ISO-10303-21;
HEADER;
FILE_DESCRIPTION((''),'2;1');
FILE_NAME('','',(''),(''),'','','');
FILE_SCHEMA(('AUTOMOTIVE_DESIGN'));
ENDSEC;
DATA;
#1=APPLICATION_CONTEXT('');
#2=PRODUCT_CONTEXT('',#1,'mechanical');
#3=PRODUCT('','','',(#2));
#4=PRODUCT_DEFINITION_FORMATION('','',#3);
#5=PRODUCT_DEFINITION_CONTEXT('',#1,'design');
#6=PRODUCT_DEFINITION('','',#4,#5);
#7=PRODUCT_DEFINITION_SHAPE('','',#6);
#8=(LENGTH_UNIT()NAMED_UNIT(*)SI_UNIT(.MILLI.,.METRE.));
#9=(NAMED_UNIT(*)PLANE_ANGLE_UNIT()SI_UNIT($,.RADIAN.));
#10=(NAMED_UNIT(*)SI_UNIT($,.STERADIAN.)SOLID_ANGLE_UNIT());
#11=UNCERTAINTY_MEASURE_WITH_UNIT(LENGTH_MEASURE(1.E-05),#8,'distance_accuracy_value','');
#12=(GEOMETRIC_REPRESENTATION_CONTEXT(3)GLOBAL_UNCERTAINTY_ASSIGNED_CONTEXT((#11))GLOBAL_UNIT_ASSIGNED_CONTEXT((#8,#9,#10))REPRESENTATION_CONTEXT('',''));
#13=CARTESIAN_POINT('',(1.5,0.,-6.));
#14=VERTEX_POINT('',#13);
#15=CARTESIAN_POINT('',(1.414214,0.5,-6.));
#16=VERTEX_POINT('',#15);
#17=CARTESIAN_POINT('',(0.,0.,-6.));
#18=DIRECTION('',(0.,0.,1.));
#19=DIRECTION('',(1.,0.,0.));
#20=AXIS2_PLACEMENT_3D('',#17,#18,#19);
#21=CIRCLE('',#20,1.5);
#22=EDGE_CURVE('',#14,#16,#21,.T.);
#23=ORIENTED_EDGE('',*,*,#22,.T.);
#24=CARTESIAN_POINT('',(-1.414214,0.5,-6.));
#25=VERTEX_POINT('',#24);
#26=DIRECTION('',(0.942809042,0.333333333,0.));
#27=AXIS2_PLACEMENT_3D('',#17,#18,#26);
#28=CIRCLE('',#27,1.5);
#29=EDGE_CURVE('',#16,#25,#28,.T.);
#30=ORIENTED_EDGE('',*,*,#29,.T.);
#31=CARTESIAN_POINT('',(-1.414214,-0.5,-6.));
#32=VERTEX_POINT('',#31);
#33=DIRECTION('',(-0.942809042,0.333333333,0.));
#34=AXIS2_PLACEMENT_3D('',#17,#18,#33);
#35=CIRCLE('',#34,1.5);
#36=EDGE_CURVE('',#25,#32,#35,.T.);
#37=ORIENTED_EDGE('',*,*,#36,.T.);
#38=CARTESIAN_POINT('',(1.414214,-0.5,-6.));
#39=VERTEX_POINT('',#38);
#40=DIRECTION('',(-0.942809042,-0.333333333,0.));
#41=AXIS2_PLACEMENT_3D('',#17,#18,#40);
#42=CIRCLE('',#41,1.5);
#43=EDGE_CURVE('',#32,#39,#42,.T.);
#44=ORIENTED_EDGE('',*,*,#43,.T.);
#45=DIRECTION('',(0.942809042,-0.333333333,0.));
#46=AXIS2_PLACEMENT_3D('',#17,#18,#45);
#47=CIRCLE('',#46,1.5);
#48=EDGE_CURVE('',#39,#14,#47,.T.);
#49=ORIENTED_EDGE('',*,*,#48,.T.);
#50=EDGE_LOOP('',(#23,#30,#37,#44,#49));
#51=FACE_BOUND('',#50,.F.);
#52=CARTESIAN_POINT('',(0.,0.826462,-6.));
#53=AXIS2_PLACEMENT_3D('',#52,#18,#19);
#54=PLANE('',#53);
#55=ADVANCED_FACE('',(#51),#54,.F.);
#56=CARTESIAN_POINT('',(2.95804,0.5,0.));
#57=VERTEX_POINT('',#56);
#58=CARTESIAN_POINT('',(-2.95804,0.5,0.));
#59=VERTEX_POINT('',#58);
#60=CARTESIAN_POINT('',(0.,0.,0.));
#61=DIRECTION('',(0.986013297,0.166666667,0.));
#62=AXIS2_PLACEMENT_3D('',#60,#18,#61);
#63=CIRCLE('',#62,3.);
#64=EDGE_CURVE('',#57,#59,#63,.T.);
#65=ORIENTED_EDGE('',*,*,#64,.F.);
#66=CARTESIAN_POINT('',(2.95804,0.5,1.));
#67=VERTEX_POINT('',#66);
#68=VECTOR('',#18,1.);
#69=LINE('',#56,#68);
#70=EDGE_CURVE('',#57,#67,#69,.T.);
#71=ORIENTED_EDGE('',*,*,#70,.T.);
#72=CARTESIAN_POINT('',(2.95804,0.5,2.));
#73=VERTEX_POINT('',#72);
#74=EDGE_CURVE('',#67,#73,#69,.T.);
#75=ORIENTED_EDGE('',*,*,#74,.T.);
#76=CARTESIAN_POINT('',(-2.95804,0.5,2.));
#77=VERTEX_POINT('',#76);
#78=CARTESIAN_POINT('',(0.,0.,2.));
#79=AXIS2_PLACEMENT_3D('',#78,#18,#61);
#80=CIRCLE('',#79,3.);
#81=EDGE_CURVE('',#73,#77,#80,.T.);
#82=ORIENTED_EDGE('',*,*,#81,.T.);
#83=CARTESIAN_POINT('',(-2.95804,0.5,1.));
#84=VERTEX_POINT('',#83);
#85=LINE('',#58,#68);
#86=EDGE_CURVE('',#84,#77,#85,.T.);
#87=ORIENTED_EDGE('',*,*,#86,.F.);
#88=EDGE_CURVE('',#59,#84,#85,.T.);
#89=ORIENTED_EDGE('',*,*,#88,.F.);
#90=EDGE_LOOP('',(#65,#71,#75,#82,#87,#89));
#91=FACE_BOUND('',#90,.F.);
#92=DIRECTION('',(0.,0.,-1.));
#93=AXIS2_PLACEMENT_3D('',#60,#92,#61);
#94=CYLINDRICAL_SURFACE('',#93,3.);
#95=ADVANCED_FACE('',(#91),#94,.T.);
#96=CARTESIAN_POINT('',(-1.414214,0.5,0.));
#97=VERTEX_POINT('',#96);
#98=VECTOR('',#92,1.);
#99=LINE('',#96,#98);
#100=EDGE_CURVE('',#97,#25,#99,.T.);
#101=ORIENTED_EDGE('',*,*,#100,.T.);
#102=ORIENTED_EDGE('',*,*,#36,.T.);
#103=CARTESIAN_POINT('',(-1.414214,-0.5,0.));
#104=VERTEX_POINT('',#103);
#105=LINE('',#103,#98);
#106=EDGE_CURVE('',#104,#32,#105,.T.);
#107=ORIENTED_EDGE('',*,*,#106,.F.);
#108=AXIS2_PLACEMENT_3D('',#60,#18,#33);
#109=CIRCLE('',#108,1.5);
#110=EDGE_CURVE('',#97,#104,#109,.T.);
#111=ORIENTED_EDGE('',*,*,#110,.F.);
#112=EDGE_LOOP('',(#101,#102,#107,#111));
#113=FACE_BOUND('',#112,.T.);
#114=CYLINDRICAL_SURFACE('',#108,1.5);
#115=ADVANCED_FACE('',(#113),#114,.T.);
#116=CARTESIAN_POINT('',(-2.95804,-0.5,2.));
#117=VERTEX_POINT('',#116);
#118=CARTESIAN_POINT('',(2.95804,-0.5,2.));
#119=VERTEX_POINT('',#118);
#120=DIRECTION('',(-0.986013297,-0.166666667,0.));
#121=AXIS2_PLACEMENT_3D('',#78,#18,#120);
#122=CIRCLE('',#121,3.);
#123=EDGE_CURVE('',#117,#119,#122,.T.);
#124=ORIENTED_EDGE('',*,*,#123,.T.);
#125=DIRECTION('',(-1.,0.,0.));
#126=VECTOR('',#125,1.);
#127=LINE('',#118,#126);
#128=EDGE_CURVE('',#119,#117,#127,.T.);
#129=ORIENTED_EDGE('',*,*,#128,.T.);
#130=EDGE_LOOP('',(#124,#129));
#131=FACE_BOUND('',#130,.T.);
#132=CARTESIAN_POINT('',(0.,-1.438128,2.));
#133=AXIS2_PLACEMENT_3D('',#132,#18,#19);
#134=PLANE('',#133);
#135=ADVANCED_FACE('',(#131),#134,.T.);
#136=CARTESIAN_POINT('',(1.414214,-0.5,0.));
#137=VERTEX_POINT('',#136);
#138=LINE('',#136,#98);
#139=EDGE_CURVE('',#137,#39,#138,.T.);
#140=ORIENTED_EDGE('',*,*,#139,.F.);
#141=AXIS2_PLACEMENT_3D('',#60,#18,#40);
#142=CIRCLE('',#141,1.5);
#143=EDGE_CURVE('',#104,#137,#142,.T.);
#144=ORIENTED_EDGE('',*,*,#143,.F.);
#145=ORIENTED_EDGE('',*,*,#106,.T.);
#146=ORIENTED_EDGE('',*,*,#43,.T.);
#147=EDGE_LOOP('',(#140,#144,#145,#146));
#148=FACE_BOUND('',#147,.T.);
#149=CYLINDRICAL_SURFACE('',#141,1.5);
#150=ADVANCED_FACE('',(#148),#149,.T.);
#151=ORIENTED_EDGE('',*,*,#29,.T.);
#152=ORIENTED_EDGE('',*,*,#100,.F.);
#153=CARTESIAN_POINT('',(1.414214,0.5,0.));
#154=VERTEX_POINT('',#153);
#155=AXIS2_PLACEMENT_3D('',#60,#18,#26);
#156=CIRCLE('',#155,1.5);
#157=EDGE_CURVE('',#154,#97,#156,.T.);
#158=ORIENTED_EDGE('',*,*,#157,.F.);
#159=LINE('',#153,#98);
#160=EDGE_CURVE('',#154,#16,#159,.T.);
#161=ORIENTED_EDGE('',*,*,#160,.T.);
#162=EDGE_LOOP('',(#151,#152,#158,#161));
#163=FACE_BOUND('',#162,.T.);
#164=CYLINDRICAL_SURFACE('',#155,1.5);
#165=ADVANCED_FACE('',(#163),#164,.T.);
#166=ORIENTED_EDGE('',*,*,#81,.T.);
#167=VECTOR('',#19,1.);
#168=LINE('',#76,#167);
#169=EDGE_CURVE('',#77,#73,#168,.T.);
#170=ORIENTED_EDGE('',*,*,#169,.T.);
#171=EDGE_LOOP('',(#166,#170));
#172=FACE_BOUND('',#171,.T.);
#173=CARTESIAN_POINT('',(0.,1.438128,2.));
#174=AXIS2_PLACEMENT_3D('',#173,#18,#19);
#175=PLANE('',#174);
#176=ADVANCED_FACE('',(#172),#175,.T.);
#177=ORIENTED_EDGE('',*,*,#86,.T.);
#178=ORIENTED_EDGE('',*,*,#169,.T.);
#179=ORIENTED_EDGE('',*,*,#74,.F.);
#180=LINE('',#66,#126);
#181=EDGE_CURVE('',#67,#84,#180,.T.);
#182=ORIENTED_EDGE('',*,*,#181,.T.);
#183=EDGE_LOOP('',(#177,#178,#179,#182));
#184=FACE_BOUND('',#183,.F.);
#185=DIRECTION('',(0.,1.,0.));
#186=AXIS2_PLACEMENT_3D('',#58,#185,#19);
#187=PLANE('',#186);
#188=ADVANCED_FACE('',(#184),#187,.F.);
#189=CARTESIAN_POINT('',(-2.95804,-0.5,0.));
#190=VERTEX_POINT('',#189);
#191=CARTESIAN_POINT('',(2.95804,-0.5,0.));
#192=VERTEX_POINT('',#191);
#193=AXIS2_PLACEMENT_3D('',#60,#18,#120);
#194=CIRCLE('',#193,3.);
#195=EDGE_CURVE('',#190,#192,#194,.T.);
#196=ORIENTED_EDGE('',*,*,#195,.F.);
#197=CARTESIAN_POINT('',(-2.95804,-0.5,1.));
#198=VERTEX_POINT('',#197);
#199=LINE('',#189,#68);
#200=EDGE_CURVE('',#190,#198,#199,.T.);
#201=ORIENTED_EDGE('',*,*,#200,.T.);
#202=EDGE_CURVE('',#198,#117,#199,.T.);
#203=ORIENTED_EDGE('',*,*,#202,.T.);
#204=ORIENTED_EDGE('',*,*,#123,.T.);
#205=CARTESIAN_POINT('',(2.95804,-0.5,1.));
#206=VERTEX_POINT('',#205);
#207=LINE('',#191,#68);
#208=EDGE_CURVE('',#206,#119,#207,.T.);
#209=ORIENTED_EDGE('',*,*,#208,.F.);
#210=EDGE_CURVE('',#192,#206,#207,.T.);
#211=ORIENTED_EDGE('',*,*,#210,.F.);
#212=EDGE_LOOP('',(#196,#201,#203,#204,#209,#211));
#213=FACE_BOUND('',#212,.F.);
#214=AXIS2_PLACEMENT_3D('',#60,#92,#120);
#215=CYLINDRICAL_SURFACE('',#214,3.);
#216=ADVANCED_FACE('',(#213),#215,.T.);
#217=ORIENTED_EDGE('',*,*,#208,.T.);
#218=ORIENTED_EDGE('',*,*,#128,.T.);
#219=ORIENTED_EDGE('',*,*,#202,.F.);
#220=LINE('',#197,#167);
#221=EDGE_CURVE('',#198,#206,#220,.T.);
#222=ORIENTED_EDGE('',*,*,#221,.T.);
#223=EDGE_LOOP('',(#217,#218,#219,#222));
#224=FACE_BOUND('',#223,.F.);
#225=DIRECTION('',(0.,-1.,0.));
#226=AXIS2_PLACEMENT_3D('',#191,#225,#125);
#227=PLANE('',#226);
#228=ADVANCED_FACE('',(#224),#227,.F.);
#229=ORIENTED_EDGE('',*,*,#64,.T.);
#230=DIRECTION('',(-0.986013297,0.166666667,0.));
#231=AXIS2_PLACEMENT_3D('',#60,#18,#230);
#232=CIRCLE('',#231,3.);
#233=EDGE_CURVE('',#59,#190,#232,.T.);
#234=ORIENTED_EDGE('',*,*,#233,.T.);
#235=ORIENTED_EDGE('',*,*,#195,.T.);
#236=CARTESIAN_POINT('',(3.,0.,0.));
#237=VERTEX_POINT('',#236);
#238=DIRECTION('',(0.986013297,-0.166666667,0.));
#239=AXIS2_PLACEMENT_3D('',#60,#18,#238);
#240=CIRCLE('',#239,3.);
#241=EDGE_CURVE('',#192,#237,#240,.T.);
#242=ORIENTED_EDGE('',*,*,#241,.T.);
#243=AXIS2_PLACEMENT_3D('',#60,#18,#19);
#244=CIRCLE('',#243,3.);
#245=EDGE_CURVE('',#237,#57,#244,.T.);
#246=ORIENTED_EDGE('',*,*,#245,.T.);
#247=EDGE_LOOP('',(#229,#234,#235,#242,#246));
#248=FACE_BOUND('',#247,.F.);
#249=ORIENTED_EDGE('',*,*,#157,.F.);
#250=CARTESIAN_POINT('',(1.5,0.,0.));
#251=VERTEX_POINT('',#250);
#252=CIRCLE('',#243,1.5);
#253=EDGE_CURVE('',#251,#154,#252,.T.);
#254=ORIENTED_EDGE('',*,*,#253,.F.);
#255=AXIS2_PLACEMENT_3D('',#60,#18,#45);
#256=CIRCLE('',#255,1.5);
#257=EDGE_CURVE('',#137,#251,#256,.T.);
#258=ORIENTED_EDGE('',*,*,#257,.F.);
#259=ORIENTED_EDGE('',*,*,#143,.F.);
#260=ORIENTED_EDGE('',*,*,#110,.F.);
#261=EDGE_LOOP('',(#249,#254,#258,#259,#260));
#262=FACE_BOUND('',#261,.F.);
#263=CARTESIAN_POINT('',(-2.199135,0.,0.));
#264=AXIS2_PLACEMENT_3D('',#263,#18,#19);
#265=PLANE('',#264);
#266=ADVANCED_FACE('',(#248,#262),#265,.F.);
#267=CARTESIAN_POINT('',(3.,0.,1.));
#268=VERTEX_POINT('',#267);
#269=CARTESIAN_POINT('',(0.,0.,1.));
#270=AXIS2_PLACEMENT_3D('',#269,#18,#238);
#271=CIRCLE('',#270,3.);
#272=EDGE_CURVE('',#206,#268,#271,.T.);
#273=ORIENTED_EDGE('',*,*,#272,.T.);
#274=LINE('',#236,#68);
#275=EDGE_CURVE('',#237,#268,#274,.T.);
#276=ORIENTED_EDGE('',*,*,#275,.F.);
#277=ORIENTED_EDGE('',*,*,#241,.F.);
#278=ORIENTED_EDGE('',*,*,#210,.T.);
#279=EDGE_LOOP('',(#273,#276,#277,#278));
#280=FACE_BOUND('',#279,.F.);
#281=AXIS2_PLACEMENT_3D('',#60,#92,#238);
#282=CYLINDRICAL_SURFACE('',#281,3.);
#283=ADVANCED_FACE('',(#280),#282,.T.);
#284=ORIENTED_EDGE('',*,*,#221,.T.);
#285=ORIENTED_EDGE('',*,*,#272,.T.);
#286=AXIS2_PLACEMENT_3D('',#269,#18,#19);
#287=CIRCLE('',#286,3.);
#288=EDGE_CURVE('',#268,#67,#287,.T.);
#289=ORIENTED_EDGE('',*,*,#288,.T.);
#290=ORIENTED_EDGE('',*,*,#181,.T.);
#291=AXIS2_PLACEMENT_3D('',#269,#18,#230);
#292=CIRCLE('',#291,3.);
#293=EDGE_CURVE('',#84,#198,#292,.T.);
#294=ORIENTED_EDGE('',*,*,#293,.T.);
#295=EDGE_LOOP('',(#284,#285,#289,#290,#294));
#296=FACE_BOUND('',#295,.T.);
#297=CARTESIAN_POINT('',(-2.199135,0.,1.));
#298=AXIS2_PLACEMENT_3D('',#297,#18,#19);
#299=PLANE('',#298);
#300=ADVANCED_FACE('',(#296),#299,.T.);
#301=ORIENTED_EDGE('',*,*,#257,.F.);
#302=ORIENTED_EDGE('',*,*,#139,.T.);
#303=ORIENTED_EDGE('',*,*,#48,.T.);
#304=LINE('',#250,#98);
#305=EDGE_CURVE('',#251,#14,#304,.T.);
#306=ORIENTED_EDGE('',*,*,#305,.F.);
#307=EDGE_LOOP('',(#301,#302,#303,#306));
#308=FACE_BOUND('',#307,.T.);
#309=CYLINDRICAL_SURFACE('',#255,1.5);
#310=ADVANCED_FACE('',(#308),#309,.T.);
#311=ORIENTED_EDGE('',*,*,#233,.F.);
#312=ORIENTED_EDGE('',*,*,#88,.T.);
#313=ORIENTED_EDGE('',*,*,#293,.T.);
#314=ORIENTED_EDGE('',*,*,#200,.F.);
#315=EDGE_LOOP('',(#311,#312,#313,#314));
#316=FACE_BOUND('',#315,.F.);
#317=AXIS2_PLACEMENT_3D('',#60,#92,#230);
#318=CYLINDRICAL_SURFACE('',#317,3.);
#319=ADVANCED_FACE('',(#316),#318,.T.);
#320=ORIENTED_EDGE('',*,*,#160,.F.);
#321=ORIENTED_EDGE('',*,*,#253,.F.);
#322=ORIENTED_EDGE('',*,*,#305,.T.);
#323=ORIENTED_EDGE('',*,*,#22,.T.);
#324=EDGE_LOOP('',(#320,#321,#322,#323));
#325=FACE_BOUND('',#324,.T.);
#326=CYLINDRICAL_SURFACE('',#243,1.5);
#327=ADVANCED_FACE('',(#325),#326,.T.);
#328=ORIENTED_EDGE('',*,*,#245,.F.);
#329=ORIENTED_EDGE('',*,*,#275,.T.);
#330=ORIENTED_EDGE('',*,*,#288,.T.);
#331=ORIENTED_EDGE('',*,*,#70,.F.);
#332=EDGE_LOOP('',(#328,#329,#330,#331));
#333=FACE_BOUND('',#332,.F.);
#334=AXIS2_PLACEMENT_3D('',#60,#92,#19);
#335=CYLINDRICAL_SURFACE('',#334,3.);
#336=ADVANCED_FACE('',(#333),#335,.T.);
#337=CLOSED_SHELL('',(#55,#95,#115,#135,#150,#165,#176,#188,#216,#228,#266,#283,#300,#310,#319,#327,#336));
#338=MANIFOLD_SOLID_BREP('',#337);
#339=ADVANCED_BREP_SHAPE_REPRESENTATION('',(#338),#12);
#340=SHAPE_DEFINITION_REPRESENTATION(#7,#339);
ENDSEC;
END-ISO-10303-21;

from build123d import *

# Parameters (mm, degrees)
F1_DEPTH = 6
F2_DEPTH = 2
F3_DEPTH = 1


# Not quite as in the source:
# - a feature names something its author has since deleted; it is built from what else it names


with BuildPart() as f1:
    # F0 (on Top) → F1 (new body)
    with BuildSketch(Plane.XY):
        with BuildLine():
            Line((-1.4142135624, 0.5), (1.4142135624, 0.5))
            ThreePointArc((1.4142135624, 0.5), (0, 1.5), (-1.4142135624, 0.5))
        make_face()
        with BuildLine():
            ThreePointArc((1.5, 0), (1.4783978395, 0.2536529681), (1.4142135624, 0.5))
            Line((1.4142135624, 0.5), (-1.4142135624, 0.5))
            ThreePointArc((-1.4142135624, 0.5), (-1.5, 0), (-1.4142135624, -0.5))
            Line((-1.4142135624, -0.5), (1.4142135624, -0.5))
            ThreePointArc((1.4142135624, -0.5), (1.4783978395, -0.2536529681), (1.5, 0))
        make_face()
        with BuildLine():
            ThreePointArc((-1.4142135624, -0.5), (0, -1.5), (1.4142135624, -0.5))
            Line((1.4142135624, -0.5), (-1.4142135624, -0.5))
        make_face()
    extrude(amount=-F1_DEPTH)

    # F0 (on Top) → F2 (join)
    with BuildSketch(Plane.XY):
        with BuildLine():
            ThreePointArc((-2.9580398915, -0.5), (0, -3), (2.9580398915, -0.5))
            Line((2.9580398915, -0.5), (1.4142135624, -0.5))
            ThreePointArc((1.4142135624, -0.5), (0, -1.5), (-1.4142135624, -0.5))
            Line((-1.4142135624, -0.5), (-2.9580398915, -0.5))
        make_face()
        with BuildLine():
            Line((1.4142135624, 0.5), (2.9580398915, 0.5))
            ThreePointArc((2.9580398915, 0.5), (0, 3), (-2.9580398915, 0.5))
            Line((-2.9580398915, 0.5), (-1.4142135624, 0.5))
            ThreePointArc((-1.4142135624, 0.5), (0, 1.5), (1.4142135624, 0.5))
        make_face()
        with BuildLine():
            Line((-1.4142135624, 0.5), (1.4142135624, 0.5))
            ThreePointArc((1.4142135624, 0.5), (0, 1.5), (-1.4142135624, 0.5))
        make_face()
        with BuildLine():
            ThreePointArc((-1.4142135624, -0.5), (0, -1.5), (1.4142135624, -0.5))
            Line((1.4142135624, -0.5), (-1.4142135624, -0.5))
        make_face()
    extrude(amount=F2_DEPTH)

    # F0 (on Top) → F3 (join)
    with BuildSketch(Plane.XY):
        with BuildLine():
            Line((-1.4142135624, 0.5), (-2.9580398915, 0.5))
            ThreePointArc((-2.9580398915, 0.5), (-3, 0), (-2.9580398915, -0.5))
            Line((-2.9580398915, -0.5), (-1.4142135624, -0.5))
            ThreePointArc((-1.4142135624, -0.5), (-1.5, 0), (-1.4142135624, 0.5))
        make_face()
        with BuildLine():
            ThreePointArc((1.5, 0), (1.4783978395, 0.2536529681), (1.4142135624, 0.5))
            Line((1.4142135624, 0.5), (-1.4142135624, 0.5))
            ThreePointArc((-1.4142135624, 0.5), (-1.5, 0), (-1.4142135624, -0.5))
            Line((-1.4142135624, -0.5), (1.4142135624, -0.5))
            ThreePointArc((1.4142135624, -0.5), (1.4783978395, -0.2536529681), (1.5, 0))
        make_face()
        with BuildLine():
            ThreePointArc((2.9580398915, -0.5), (2.9894915684, -0.2508787808), (3, 0))
            ThreePointArc((3, 0), (2.9894915684, 0.2508787808), (2.9580398915, 0.5))
            Line((2.9580398915, 0.5), (1.4142135624, 0.5))
            ThreePointArc((1.4142135624, 0.5), (1.4783978395, 0.2536529681), (1.5, 0))
            ThreePointArc((1.5, 0), (1.4783978395, -0.2536529681), (1.4142135624, -0.5))
            Line((1.4142135624, -0.5), (2.9580398915, -0.5))
        make_face()
    extrude(amount=F3_DEPTH)


solid = f1.part
